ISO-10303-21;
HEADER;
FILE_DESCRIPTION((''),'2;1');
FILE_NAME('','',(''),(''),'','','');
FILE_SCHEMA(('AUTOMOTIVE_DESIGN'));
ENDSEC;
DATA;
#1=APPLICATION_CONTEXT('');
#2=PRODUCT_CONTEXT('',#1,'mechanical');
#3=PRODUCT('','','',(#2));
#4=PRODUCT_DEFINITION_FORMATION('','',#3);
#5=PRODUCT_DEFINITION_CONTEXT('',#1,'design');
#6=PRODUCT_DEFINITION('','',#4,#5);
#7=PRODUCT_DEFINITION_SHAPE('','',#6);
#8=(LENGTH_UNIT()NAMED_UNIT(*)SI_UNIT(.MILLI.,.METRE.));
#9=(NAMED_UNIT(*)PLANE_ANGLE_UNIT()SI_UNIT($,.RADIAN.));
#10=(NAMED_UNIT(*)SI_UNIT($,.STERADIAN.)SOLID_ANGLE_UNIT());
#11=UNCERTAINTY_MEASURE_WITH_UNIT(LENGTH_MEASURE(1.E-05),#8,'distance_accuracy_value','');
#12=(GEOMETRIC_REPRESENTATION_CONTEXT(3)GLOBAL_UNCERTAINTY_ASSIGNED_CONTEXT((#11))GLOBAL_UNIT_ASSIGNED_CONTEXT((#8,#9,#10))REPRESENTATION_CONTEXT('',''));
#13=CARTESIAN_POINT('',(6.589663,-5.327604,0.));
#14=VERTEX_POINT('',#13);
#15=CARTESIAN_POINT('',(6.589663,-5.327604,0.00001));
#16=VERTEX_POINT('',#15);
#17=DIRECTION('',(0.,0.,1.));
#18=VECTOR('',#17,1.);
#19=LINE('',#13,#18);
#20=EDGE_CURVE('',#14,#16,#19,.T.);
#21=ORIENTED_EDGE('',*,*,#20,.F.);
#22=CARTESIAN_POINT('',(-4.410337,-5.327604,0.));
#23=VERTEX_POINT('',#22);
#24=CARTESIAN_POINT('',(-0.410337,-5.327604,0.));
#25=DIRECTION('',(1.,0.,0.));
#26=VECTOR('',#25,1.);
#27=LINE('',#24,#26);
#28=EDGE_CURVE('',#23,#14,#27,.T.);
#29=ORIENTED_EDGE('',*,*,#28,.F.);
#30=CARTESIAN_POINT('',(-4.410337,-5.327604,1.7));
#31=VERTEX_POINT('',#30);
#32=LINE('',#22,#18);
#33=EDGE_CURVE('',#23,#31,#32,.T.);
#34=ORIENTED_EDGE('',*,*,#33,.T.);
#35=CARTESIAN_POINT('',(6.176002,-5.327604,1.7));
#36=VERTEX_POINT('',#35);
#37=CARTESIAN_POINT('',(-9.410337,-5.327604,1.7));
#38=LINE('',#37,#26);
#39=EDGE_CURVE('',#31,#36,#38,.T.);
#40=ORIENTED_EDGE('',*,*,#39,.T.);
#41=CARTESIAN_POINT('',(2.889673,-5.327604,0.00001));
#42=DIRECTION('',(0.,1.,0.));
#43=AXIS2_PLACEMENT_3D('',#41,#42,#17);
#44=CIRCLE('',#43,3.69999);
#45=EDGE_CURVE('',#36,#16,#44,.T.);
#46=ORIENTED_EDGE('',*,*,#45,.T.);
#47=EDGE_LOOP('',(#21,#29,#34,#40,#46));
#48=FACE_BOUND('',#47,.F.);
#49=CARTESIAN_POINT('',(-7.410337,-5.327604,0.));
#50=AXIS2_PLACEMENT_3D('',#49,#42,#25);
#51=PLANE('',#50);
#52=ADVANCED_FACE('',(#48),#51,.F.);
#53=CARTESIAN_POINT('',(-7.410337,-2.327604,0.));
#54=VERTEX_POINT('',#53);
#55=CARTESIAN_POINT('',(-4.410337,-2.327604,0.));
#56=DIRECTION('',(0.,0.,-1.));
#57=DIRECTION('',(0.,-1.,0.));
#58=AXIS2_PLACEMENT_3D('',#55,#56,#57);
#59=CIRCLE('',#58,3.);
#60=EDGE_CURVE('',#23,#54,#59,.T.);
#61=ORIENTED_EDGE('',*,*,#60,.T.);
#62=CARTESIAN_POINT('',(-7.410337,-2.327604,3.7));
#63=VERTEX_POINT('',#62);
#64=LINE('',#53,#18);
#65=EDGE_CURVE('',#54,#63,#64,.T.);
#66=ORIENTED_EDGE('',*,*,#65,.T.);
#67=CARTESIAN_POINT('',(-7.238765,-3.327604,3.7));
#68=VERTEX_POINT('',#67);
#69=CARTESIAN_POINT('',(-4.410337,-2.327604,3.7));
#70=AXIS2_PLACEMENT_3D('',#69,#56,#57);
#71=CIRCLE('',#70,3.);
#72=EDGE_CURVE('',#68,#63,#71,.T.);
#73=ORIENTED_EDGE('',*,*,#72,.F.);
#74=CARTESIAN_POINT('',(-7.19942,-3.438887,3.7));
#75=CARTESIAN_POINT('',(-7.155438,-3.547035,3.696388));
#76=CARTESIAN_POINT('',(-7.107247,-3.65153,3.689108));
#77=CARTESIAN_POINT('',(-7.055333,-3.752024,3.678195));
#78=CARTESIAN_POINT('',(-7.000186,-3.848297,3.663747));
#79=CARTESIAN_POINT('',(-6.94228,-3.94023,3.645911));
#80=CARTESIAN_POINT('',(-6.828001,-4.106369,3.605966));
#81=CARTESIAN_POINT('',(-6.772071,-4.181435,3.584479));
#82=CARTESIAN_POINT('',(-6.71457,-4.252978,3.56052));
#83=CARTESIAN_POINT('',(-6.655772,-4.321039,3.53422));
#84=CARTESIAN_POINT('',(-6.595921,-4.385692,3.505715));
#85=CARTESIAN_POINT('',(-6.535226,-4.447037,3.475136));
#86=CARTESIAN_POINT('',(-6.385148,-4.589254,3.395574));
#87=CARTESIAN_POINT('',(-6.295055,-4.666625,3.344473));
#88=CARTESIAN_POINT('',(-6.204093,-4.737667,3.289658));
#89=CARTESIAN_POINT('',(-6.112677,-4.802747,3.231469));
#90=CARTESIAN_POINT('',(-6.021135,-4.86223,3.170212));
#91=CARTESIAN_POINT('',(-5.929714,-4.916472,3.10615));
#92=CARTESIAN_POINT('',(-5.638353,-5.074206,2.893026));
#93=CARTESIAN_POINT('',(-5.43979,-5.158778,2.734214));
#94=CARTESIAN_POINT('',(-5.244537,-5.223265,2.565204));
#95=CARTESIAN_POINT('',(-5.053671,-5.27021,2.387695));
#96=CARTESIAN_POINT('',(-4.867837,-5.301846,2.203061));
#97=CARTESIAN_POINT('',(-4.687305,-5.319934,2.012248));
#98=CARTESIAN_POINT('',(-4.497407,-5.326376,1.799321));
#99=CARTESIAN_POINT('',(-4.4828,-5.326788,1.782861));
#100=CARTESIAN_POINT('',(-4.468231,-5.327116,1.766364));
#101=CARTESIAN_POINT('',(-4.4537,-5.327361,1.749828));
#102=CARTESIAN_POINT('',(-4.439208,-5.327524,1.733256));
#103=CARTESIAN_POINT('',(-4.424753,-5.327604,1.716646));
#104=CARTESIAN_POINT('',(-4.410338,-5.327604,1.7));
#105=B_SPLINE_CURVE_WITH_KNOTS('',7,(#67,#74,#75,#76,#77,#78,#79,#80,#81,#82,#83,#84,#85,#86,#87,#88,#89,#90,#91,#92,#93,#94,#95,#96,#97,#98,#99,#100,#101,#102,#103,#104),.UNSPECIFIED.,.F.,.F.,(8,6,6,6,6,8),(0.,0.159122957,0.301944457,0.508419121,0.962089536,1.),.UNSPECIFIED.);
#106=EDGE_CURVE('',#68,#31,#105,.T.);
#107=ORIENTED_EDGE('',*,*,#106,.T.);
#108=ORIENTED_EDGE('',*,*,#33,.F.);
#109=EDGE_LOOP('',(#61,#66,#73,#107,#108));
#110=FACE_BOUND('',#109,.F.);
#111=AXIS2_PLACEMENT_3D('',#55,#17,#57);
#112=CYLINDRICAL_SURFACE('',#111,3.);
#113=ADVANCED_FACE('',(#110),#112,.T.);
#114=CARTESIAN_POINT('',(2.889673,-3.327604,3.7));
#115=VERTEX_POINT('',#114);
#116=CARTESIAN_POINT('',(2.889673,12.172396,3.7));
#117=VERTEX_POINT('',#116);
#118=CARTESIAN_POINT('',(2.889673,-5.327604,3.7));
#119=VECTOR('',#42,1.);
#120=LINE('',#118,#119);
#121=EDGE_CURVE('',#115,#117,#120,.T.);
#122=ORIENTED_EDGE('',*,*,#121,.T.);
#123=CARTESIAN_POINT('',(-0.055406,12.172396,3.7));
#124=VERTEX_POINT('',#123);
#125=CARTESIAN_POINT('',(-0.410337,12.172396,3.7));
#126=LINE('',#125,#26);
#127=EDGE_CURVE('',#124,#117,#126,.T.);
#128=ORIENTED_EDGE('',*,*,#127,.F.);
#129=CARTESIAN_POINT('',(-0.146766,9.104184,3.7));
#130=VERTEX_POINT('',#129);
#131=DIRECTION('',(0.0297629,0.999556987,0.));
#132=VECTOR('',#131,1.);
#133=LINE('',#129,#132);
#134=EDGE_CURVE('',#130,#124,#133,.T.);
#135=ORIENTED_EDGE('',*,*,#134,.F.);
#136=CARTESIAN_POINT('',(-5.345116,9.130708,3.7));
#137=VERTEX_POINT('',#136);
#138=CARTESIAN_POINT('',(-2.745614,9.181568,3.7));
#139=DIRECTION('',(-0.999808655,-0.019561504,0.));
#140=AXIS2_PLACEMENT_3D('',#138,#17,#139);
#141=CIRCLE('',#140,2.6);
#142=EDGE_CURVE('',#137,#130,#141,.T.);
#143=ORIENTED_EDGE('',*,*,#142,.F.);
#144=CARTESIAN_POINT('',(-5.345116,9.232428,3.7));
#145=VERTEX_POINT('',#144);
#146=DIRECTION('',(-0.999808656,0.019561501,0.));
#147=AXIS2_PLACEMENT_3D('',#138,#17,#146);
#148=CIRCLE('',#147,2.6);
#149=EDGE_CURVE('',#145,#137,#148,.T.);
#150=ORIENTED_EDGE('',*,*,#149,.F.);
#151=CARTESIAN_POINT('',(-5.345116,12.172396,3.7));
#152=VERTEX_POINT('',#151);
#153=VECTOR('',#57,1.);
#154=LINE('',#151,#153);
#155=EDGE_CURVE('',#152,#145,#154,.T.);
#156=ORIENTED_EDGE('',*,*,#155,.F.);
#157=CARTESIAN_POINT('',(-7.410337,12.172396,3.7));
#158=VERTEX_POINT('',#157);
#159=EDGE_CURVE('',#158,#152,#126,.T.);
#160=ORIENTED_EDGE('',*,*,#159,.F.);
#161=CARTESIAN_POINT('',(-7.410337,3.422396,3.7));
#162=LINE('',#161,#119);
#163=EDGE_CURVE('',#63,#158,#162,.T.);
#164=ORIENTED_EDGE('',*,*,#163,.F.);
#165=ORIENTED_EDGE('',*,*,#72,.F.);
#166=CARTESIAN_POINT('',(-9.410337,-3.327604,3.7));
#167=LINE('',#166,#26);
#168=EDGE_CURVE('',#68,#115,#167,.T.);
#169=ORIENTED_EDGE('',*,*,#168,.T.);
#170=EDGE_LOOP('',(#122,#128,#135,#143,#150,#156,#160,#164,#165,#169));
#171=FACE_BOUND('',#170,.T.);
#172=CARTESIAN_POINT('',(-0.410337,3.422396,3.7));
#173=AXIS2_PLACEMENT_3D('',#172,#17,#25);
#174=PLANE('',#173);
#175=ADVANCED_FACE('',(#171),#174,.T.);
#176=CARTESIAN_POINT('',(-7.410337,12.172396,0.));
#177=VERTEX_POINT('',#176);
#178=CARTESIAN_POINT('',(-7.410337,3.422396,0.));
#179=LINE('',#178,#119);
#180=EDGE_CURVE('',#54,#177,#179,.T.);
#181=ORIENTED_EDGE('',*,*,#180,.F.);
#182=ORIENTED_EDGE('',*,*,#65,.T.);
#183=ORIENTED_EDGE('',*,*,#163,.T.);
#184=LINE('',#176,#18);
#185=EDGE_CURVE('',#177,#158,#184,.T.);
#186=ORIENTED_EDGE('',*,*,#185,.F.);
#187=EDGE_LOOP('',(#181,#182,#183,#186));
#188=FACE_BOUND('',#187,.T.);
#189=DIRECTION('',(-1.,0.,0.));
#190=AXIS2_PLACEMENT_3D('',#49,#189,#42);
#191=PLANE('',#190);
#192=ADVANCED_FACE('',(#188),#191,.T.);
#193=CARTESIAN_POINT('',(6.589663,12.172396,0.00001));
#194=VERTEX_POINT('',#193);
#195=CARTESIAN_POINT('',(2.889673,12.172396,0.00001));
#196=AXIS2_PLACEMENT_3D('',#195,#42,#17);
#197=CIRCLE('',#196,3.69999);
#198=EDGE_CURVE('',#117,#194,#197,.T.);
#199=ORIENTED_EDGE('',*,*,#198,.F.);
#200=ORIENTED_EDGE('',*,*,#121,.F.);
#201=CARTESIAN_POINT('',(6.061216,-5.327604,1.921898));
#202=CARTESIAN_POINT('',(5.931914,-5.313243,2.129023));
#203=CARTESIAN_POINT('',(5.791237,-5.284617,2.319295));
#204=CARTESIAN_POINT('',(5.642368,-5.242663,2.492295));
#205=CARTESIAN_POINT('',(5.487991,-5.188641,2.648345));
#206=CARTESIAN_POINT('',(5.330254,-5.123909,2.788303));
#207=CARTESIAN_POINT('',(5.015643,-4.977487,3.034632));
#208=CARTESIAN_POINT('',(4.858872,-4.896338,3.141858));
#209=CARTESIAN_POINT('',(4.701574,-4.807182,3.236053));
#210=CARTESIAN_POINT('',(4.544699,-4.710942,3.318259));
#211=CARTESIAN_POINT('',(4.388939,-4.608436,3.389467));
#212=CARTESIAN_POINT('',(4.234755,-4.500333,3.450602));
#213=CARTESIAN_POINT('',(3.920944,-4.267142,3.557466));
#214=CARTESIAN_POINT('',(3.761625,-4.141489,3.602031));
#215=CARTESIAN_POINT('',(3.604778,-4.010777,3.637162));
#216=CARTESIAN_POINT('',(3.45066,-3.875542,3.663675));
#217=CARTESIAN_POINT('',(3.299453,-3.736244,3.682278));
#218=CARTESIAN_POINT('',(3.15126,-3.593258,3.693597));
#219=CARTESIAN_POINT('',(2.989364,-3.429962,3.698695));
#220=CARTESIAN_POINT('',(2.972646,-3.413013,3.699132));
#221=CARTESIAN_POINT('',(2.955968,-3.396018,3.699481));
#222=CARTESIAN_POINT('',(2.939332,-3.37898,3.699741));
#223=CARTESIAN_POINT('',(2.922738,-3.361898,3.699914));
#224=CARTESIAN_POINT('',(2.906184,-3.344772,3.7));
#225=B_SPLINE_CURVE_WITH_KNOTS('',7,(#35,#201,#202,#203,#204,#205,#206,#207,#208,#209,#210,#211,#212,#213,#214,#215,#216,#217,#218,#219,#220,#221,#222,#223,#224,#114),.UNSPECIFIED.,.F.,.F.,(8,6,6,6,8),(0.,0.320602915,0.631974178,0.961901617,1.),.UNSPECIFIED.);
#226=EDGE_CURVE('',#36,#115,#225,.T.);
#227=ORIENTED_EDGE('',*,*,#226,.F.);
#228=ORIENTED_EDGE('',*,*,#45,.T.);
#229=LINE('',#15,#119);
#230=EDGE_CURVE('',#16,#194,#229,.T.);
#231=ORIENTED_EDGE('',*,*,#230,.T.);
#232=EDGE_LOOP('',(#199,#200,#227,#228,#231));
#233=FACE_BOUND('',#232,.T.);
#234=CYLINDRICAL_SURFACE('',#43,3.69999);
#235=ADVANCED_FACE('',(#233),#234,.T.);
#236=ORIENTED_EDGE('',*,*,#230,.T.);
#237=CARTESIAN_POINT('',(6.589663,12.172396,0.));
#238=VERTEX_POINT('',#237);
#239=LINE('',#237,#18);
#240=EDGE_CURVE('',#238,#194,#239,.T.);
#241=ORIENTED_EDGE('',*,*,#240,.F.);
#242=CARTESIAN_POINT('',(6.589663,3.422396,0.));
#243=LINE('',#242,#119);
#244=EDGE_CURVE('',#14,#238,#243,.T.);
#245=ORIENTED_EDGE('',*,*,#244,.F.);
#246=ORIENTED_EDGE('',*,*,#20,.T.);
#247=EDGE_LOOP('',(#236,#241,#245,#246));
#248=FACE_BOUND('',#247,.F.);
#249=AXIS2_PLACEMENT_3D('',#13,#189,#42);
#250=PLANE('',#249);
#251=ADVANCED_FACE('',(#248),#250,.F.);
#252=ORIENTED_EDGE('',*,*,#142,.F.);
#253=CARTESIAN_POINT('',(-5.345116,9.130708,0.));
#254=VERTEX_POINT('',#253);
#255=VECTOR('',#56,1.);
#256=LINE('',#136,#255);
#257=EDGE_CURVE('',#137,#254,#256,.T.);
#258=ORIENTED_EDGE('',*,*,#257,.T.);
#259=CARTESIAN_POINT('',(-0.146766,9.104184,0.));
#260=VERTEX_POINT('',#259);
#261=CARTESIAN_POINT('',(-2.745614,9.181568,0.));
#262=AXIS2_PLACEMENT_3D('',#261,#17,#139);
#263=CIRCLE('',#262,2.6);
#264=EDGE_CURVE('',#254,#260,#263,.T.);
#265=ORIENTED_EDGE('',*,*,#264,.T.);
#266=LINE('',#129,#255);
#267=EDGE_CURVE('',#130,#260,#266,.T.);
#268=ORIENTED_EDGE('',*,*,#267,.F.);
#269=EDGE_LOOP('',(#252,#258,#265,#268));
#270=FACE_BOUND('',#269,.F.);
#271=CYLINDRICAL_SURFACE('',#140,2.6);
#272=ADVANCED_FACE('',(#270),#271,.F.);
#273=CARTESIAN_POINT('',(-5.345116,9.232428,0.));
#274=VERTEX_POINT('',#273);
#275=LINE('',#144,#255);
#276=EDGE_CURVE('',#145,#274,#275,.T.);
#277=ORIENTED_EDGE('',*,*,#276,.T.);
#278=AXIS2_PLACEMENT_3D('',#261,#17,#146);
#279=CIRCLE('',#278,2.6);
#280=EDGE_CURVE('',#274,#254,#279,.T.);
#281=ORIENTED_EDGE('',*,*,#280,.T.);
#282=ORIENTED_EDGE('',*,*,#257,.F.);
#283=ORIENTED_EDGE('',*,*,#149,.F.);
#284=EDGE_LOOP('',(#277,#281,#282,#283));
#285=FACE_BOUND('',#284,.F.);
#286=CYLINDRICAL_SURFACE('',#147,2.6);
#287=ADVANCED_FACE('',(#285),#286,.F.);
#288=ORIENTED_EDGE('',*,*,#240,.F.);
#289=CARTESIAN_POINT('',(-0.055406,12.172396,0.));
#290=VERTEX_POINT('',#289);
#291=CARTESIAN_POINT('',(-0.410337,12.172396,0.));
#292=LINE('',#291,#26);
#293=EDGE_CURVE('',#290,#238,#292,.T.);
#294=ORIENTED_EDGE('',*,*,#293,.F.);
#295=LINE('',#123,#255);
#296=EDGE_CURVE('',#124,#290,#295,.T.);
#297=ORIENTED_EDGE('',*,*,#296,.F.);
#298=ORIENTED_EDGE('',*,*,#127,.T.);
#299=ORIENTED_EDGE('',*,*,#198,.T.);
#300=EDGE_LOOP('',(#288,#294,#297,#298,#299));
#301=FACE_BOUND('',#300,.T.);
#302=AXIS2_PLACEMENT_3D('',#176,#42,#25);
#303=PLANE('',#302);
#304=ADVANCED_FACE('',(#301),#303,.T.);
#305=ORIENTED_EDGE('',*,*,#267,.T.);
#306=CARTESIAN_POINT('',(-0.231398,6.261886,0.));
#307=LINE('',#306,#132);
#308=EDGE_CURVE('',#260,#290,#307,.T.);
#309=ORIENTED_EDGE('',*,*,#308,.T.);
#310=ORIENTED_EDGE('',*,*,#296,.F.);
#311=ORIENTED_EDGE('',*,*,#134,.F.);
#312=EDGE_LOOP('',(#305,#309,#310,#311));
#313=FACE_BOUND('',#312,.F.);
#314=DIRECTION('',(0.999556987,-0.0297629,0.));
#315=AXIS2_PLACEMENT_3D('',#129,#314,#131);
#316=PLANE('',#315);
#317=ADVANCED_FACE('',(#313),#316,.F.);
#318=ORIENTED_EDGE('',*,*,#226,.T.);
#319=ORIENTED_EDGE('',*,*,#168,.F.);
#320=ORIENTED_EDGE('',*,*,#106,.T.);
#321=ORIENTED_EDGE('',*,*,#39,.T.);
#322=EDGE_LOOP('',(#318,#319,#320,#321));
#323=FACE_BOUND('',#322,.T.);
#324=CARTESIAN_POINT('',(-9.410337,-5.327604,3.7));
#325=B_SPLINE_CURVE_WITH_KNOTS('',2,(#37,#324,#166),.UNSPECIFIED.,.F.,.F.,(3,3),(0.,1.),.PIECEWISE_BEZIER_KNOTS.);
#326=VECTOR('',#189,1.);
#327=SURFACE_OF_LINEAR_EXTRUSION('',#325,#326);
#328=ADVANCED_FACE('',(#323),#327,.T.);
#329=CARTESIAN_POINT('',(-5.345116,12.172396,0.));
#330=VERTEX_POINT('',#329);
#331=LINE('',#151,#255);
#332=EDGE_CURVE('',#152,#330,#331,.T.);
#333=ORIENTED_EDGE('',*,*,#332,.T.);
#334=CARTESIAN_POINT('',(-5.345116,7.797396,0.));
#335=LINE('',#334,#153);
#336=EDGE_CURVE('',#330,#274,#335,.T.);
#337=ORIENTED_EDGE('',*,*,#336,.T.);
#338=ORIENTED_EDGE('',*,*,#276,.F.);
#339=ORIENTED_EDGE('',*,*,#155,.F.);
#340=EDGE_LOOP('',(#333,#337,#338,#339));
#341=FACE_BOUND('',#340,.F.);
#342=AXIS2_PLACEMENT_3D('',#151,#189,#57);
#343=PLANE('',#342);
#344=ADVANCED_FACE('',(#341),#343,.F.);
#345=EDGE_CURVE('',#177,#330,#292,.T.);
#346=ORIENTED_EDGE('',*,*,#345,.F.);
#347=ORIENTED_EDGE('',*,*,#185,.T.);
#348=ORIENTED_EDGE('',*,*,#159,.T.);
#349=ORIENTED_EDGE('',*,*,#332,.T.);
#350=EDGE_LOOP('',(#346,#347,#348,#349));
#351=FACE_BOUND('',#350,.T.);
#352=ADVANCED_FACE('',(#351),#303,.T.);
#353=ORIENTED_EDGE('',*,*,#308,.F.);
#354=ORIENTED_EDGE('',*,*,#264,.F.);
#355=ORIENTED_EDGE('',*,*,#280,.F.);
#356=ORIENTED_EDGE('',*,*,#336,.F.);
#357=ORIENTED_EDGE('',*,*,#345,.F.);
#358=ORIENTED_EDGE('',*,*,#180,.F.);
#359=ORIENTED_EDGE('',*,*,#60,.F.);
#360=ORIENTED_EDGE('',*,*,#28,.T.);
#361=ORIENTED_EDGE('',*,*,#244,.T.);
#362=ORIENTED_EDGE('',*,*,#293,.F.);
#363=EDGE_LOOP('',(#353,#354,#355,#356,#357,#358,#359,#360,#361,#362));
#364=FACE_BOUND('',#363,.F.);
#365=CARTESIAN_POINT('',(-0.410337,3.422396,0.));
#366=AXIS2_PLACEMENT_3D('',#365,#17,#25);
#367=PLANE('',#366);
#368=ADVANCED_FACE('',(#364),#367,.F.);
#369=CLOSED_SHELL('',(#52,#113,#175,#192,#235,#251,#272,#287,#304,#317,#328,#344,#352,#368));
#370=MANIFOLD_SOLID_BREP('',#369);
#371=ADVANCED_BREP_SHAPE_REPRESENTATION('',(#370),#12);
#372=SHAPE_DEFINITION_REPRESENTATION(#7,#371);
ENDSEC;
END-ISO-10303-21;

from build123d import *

# Parameters (mm, degrees)
F0_W        = 14
F0_H        = 17.5
F1_DEPTH    = 3.7
F3_DEPTH    = 5.4
F4_R        = 3.69999
F5_R        = 3
F6_T1_DEPTH = 17.30001


# Not quite as in the source:
# - a fillet or chamfer that OpenCascade refuses, or shapes differently, is made with other operations: its cross-section is extruded or revolved along the edge and cut away or added
# - a fillet or chamfer is up to 0.001 mm smaller than in the source, because OpenCascade refuses the exact size


with BuildPart() as f1:
    # F0 (on Top) → F1 (new body)
    with BuildSketch(Plane.XY):
        with Locations((-0.4103374667, 3.4223956802)):
            Rectangle(F0_W, F0_H)
    extrude(amount=F1_DEPTH)

    # F2 (on face) → F3 (cut)
    with BuildSketch(Plane.XY.offset(3.7)):
        with BuildLine():
            Line((-5.3451164257, 9.1307080224), (-5.3451164257, 9.2324278445))
            ThreePointArc((-5.3451164257, 9.2324278445), (-5.3456139214, 9.1815679334), (-5.3451164257, 9.1307080224))
        make_face()
        with BuildLine():
            Line((-5.3451164257, 12.1723956802), (-5.3451164257, 9.2324278445))
            Line((-5.3451164257, 9.2324278445), (-5.3451164257, 9.1307080224))
            ThreePointArc((-5.3451164257, 9.1307080224), (-2.7588797704, 6.5816017765), (-0.1467657558, 9.1041843944))
            Line((-0.1467657558, 9.1041843944), (-0.055406418, 12.1723956802))
            Line((-0.055406418, 12.1723956802), (-5.3451164257, 12.1723956802))
        make_face()
    extrude(amount=-F3_DEPTH, mode=Mode.SUBTRACT)

    # F4 (radius 3.7 in the source; OpenCascade refuses exactly that, so slightly less here)
    f4_edges = [f1.edges().sort_by_distance(p)[0] for p in [
        (6.589663, 3.422396, 3.7),
    ]]
    fillet(f4_edges, radius=F4_R)

    # F5
    f5_edges = [f1.edges().sort_by_distance(p)[0] for p in [
        (-7.410337, -5.327604, 1.85),
    ]]
    fillet(f5_edges, radius=F5_R)

    # F6: fillet of radius 2 on 1 edges, made by hand

    # F6_s2 → F6_t1 (cut)
    with BuildSketch(Plane.YZ.offset(-9.4103374667)):
        with BuildLine():
            add(Edge.make_bspline(
                [(-5.3276043198, 1.7), (-5.3276043198, 3.7), (-3.3276043198, 3.7)],
                knots=[0, 0, 0, 1, 1, 1], degree=2, weights=[1, 1, 1]))
            Line((-3.3276043198, 3.7), (-5.3276043198, 3.7))
            Line((-5.3276043198, 3.7), (-5.3276043198, 1.7))
        make_face()
    extrude(amount=F6_T1_DEPTH, mode=Mode.SUBTRACT)


solid = f1.part
